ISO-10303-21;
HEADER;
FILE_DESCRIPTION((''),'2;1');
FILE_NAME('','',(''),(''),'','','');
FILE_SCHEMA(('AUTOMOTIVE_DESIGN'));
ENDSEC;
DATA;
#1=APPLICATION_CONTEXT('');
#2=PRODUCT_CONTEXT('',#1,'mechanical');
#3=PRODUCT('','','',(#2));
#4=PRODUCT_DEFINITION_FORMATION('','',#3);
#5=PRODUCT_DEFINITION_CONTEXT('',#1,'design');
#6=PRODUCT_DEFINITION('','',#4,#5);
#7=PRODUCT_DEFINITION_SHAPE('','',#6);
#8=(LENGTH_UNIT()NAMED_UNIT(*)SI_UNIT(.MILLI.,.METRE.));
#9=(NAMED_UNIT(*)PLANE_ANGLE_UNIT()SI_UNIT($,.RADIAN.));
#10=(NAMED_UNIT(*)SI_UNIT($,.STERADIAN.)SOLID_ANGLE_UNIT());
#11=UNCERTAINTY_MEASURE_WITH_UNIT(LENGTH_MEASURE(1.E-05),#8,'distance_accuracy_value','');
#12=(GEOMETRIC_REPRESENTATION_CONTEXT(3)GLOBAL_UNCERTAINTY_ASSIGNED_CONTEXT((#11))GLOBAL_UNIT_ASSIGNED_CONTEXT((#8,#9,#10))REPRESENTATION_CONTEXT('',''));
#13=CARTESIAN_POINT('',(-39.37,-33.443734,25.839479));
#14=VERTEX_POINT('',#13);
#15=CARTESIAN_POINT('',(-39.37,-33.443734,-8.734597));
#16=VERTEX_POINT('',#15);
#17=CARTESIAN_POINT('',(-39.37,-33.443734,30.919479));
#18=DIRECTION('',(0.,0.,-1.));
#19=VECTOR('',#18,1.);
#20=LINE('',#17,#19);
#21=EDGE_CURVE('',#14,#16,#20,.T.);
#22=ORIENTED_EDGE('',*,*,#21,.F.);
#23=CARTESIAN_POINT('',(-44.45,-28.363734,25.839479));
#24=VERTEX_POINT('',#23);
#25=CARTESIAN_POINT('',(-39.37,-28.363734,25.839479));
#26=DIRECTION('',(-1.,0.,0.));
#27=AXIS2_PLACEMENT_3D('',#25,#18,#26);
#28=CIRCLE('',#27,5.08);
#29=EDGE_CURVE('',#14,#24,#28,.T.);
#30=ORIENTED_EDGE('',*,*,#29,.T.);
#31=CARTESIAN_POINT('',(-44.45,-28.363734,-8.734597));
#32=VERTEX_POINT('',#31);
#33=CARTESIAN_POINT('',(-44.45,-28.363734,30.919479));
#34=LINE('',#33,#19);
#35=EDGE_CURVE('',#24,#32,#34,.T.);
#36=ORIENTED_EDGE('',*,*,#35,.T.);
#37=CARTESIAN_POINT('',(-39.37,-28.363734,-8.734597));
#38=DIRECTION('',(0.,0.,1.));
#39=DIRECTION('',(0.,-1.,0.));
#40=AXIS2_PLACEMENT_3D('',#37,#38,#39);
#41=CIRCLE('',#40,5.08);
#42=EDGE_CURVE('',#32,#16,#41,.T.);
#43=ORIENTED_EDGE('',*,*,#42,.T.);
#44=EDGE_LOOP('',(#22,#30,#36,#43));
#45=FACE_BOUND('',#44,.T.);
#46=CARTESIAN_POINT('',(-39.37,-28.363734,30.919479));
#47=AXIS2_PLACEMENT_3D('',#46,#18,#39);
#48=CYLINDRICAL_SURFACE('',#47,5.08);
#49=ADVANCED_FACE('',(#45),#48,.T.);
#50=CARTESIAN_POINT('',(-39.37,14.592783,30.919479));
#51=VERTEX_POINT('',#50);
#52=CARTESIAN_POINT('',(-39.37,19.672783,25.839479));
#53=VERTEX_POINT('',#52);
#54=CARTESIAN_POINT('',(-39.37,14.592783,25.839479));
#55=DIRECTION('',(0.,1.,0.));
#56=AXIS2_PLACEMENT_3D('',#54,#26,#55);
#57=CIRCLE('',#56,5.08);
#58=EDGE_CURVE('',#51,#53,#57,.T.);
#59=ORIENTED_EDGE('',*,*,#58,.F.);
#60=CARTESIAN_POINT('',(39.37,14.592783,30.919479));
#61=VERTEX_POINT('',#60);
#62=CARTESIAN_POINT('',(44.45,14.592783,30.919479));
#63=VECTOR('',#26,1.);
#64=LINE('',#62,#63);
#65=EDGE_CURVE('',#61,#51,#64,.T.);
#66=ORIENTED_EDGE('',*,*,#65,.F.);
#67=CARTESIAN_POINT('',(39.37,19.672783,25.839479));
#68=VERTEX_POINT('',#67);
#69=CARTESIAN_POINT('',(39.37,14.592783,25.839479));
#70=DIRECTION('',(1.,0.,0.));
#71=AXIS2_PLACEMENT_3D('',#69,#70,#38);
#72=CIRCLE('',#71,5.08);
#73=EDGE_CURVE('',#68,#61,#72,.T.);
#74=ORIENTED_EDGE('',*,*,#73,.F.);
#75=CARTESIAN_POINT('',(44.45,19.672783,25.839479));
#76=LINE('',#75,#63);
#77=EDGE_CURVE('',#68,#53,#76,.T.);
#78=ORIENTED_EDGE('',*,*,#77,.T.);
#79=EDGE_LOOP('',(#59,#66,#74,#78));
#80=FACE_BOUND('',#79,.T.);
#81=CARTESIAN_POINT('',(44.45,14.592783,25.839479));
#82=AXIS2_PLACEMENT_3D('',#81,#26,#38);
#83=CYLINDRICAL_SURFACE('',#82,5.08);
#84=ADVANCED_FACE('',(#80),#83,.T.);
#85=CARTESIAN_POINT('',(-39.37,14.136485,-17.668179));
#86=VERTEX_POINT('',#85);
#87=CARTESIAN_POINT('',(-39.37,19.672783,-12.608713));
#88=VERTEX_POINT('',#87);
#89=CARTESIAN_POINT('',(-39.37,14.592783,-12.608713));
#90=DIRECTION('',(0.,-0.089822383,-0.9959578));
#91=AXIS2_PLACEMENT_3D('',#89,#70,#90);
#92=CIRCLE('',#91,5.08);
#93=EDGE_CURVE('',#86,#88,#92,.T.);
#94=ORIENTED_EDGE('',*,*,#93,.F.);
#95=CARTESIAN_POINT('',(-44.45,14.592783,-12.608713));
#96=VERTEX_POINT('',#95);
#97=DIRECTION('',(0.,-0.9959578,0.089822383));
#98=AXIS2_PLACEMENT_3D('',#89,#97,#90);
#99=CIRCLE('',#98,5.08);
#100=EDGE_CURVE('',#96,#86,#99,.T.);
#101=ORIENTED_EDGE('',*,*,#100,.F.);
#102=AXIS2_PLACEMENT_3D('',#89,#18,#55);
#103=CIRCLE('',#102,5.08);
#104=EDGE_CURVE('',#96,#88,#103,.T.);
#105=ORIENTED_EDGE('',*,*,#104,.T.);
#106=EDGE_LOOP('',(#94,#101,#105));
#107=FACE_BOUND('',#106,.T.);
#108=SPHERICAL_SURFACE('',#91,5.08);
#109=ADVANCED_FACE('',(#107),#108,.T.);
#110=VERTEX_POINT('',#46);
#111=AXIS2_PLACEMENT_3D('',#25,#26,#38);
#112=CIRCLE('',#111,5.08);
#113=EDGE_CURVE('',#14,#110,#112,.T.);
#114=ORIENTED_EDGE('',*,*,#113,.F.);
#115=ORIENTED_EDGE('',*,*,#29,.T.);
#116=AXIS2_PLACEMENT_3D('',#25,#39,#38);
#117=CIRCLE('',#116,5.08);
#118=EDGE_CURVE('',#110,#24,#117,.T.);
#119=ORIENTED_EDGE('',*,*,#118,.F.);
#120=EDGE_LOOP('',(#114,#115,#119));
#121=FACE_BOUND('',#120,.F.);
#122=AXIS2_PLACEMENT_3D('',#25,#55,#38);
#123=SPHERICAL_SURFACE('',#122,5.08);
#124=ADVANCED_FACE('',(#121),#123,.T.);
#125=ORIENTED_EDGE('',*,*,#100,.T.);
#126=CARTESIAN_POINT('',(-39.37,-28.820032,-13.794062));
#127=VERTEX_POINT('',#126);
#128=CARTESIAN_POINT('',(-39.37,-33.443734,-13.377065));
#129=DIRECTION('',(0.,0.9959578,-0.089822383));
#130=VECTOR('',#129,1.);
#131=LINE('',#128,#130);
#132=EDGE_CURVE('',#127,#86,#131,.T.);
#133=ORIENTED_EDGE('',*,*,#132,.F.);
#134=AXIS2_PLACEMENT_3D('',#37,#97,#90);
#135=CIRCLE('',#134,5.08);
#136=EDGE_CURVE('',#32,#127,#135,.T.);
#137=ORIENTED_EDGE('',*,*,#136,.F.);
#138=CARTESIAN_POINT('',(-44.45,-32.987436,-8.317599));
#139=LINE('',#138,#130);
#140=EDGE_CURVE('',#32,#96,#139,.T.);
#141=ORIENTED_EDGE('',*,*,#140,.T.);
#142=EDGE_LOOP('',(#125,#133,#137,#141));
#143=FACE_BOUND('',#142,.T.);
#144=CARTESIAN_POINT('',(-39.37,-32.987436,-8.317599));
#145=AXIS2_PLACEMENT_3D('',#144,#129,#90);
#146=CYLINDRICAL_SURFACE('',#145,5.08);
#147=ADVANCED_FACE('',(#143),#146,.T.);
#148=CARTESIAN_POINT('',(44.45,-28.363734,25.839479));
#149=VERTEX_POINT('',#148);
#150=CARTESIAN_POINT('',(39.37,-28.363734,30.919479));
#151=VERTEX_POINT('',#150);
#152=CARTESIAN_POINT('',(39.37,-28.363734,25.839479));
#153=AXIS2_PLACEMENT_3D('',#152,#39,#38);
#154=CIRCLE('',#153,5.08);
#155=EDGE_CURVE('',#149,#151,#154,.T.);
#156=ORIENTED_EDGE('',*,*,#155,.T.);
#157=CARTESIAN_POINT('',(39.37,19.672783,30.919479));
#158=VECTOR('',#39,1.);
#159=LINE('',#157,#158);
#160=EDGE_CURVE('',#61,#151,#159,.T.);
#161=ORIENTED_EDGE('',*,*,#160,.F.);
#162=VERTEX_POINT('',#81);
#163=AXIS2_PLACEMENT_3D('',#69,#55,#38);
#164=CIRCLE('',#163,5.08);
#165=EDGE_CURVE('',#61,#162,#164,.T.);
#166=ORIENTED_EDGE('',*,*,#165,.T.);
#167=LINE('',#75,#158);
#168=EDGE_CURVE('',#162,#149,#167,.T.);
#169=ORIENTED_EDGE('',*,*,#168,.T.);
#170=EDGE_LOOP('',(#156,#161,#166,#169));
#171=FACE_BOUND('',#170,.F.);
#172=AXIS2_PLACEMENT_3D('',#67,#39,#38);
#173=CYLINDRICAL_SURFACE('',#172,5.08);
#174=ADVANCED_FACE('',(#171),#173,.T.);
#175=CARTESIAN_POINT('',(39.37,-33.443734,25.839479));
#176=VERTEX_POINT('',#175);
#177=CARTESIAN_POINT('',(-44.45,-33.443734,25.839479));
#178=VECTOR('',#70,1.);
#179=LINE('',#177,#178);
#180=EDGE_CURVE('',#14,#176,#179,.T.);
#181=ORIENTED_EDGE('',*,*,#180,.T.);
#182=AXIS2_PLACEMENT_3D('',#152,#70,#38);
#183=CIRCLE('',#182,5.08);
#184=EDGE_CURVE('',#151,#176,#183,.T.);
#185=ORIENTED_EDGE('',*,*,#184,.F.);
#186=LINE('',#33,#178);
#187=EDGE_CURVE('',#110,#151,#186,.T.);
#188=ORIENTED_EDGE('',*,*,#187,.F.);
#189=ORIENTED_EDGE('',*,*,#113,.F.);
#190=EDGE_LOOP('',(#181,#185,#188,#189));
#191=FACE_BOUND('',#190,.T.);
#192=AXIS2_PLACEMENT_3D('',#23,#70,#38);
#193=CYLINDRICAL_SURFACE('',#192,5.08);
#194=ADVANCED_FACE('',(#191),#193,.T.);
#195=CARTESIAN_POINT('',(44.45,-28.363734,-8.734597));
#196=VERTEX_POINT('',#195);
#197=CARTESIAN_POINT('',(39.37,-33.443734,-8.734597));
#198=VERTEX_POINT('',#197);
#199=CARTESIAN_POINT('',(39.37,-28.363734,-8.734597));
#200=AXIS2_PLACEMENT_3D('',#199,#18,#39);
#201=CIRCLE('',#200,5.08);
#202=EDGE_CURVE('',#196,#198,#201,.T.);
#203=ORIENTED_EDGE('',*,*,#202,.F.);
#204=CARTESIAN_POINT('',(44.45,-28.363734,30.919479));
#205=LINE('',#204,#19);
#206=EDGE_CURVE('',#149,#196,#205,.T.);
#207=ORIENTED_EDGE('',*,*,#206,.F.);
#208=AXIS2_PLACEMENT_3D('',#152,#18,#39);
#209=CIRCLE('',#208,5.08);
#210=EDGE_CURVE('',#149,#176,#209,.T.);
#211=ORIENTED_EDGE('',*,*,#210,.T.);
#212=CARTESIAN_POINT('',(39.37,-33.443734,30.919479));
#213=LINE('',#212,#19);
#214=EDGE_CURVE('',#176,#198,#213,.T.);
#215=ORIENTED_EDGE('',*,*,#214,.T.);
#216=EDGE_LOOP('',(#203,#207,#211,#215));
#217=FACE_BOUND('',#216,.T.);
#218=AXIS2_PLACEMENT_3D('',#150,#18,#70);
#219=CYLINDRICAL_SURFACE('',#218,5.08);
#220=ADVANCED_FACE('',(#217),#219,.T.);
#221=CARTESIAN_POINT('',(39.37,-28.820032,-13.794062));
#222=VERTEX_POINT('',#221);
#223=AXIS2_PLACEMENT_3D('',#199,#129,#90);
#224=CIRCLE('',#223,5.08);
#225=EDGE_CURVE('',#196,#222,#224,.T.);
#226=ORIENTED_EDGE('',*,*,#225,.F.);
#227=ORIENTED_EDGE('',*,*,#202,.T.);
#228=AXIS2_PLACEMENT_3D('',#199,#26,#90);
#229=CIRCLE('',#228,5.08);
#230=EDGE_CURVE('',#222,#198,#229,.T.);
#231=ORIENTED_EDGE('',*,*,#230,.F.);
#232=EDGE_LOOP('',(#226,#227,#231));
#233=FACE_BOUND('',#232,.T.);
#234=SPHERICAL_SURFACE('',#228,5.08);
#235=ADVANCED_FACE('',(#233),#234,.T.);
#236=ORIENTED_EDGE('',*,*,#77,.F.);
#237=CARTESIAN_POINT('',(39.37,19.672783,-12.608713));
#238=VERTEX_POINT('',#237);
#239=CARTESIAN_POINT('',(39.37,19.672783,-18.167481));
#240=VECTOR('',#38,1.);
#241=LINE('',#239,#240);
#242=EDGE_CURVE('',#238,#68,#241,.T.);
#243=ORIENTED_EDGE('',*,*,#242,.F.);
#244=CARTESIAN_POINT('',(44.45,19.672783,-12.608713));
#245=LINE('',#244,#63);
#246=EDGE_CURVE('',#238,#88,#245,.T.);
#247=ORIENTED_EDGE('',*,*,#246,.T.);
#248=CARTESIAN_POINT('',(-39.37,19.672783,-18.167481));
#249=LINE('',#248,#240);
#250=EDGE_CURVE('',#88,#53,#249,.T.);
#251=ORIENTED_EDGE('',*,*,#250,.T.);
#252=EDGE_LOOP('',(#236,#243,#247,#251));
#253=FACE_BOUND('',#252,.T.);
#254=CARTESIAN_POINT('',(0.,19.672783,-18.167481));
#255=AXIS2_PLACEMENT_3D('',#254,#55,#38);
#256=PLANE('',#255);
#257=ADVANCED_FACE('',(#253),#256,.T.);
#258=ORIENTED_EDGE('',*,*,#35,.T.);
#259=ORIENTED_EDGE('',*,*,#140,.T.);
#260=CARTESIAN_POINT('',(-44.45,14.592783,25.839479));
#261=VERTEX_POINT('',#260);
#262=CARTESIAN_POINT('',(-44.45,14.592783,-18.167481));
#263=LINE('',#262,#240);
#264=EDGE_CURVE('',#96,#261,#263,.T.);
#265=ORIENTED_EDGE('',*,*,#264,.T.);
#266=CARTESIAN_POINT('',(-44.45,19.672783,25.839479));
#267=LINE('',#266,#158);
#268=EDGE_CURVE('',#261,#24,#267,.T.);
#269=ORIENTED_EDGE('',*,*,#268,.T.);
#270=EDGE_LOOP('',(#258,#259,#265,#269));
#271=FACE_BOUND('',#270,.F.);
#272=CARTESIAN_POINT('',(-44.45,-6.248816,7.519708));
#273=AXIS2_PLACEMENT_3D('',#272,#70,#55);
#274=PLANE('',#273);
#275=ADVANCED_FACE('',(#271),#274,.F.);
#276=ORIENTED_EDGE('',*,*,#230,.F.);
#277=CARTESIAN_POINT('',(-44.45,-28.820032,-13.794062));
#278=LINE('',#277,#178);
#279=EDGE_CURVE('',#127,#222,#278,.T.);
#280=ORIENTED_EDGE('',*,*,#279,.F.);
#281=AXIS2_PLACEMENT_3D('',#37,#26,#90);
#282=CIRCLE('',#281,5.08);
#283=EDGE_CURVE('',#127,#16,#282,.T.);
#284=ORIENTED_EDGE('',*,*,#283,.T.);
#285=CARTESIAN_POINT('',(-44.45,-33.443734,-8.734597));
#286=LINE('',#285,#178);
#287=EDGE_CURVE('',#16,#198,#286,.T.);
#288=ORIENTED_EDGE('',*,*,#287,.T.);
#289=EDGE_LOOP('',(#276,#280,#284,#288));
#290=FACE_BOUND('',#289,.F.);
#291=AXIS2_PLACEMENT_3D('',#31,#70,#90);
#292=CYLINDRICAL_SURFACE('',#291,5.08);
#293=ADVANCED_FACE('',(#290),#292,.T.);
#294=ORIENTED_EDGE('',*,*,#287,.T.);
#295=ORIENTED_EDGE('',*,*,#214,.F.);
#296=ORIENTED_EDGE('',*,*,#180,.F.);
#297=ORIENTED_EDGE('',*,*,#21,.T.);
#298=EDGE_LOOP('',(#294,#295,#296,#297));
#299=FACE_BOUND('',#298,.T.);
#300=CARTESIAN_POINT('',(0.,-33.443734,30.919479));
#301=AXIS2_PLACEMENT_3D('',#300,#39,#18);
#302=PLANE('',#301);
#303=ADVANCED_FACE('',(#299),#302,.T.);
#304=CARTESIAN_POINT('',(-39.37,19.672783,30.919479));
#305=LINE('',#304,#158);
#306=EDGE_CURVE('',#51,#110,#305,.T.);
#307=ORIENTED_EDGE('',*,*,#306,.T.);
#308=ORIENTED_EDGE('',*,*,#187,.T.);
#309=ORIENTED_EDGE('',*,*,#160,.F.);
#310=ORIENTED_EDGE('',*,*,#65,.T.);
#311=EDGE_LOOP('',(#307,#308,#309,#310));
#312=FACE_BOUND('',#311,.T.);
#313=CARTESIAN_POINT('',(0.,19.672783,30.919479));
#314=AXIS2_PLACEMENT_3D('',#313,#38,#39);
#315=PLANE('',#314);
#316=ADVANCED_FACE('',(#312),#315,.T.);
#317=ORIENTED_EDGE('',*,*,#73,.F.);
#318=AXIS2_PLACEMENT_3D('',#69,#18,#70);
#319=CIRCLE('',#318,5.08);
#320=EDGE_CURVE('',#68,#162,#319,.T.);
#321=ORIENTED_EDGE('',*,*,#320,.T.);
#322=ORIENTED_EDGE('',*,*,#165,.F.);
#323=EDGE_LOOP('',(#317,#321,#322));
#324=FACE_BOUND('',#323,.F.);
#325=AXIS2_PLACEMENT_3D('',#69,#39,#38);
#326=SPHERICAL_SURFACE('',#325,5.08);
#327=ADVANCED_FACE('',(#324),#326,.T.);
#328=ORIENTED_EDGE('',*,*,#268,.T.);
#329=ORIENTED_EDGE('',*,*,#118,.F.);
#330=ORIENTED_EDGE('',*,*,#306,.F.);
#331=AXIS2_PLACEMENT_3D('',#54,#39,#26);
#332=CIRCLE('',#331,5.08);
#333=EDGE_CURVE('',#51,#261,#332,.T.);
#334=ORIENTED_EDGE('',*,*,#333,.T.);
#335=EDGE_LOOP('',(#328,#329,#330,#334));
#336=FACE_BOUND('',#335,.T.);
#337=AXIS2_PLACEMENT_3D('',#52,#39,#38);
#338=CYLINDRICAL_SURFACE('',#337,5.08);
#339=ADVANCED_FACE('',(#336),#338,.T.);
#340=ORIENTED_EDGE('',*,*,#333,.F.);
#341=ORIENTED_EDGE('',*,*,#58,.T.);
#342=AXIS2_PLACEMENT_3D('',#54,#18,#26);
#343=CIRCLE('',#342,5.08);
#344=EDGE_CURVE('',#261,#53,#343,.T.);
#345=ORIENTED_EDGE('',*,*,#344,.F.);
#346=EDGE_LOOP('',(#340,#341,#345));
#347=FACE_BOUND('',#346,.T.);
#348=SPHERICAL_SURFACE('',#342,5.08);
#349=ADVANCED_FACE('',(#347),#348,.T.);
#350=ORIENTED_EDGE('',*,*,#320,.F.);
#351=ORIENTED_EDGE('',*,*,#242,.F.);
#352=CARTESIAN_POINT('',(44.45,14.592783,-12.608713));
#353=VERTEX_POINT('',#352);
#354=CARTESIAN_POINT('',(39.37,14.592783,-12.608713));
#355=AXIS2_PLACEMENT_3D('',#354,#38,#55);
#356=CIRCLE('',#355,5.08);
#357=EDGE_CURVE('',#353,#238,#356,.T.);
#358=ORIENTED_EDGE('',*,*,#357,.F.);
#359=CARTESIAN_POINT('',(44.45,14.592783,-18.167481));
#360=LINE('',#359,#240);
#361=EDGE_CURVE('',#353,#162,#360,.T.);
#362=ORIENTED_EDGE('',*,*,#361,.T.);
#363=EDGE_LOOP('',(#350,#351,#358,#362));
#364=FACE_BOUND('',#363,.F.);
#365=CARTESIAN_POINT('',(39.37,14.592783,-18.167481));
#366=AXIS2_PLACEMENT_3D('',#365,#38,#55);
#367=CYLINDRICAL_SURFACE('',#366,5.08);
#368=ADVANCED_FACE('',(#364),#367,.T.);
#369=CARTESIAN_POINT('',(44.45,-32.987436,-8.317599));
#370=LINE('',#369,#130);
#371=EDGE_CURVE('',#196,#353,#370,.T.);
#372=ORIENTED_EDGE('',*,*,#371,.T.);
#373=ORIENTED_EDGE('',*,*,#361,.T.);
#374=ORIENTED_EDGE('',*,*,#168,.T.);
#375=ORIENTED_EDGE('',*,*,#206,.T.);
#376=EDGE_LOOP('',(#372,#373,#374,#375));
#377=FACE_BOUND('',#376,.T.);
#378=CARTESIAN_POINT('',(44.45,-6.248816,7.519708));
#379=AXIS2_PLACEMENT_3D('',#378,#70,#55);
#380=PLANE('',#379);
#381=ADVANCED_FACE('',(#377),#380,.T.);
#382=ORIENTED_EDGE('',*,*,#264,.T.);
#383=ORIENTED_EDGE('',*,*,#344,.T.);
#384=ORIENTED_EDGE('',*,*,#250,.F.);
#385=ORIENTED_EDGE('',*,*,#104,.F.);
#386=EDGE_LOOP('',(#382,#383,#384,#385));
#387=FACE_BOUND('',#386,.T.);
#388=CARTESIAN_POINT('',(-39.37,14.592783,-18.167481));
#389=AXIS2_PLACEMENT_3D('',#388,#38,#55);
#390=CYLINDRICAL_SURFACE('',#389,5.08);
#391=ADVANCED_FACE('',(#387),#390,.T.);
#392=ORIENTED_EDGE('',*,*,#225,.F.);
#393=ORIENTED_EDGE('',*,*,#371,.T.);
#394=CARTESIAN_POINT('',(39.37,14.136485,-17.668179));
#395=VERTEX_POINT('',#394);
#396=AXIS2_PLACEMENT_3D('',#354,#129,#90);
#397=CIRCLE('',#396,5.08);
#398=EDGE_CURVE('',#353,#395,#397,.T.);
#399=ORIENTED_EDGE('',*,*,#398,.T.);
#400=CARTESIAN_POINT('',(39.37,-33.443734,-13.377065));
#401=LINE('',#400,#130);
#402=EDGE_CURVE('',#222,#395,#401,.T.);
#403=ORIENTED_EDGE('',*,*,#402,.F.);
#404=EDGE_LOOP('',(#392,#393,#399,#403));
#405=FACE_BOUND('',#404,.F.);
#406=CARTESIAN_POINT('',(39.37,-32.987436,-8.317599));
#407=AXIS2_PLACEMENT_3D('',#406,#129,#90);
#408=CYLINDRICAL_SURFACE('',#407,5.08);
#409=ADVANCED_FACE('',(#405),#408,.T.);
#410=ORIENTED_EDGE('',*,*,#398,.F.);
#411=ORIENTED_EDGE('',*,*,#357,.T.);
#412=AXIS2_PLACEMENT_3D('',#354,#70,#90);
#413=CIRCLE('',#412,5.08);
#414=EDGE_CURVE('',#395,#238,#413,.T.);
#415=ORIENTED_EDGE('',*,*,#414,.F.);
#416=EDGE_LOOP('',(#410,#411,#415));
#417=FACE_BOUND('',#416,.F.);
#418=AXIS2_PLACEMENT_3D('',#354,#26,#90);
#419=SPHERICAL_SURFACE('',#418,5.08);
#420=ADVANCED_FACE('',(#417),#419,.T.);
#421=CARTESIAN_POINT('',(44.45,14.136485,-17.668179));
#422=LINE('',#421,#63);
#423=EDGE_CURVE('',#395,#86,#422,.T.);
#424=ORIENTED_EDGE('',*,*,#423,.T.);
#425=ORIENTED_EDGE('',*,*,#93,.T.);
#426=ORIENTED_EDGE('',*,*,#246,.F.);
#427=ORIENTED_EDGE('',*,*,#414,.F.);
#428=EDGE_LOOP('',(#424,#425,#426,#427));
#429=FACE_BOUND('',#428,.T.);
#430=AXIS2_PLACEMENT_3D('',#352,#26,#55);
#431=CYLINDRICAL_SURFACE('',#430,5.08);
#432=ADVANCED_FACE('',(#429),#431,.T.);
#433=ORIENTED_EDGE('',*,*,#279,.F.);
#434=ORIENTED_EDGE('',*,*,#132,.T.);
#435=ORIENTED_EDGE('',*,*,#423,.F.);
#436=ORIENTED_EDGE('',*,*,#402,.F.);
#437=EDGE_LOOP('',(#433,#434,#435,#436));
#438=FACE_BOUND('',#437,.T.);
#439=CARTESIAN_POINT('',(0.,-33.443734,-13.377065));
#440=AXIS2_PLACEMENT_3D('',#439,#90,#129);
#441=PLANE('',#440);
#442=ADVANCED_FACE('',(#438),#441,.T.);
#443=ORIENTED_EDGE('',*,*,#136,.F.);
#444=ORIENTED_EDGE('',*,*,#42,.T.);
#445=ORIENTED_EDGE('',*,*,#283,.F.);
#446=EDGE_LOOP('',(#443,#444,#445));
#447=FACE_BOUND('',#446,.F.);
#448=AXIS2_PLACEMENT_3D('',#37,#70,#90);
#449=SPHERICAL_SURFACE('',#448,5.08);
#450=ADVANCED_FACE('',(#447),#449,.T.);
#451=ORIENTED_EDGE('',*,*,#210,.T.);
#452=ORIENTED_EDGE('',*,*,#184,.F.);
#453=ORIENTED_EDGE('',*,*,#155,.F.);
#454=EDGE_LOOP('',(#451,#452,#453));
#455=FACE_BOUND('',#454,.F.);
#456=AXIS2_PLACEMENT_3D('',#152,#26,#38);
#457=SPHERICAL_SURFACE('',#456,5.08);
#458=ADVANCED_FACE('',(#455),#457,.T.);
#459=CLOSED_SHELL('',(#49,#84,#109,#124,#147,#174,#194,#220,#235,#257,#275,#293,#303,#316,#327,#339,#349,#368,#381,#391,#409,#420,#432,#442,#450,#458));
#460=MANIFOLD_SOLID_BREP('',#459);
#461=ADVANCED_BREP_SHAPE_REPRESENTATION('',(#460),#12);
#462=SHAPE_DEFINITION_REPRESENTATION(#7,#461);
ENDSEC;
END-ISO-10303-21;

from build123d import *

# Parameters (mm, degrees)
F1_DEPTH = 44.45
F3_R     = 5.08


# Not quite as in the source:
# - a feature of the source that left no trace in its solid (it failed there, or was rolled back) is left out


with BuildPart() as f1:
    # F0 (on Right) → F1 (new body, symmetric)
    with BuildSketch(Plane.YZ):
        Polygon((19.6727830917, 30.9194792062), (-33.4437340498, 30.9194792062), (-33.4437340498, -13.377064839), (19.6727830917, -18.1674808264), align=None)
    extrude(amount=F1_DEPTH, both=True)

    # F3
    f3_edges = [f1.edges().sort_by_distance(p)[0] for p in [
        (-44.45, 19.672783, 6.375999),
        (-44.45, -6.885475, 30.919479),
        (0, -33.443734, 30.919479),
        (44.45, -6.885475, 30.919479),
        (0, 19.672783, 30.919479),
        (44.45, 19.672783, 6.375999),
        (0, 19.672783, -18.167481),
        (0, -33.443734, -13.377065),
        (-44.45, -6.885475, -15.772273),
        (44.45, -6.885475, -15.772273),
        (44.45, -33.443734, 8.771207),
        (-44.45, -33.443734, 8.771207),
    ]]
    fillet(f3_edges, radius=F3_R)


solid = f1.part
